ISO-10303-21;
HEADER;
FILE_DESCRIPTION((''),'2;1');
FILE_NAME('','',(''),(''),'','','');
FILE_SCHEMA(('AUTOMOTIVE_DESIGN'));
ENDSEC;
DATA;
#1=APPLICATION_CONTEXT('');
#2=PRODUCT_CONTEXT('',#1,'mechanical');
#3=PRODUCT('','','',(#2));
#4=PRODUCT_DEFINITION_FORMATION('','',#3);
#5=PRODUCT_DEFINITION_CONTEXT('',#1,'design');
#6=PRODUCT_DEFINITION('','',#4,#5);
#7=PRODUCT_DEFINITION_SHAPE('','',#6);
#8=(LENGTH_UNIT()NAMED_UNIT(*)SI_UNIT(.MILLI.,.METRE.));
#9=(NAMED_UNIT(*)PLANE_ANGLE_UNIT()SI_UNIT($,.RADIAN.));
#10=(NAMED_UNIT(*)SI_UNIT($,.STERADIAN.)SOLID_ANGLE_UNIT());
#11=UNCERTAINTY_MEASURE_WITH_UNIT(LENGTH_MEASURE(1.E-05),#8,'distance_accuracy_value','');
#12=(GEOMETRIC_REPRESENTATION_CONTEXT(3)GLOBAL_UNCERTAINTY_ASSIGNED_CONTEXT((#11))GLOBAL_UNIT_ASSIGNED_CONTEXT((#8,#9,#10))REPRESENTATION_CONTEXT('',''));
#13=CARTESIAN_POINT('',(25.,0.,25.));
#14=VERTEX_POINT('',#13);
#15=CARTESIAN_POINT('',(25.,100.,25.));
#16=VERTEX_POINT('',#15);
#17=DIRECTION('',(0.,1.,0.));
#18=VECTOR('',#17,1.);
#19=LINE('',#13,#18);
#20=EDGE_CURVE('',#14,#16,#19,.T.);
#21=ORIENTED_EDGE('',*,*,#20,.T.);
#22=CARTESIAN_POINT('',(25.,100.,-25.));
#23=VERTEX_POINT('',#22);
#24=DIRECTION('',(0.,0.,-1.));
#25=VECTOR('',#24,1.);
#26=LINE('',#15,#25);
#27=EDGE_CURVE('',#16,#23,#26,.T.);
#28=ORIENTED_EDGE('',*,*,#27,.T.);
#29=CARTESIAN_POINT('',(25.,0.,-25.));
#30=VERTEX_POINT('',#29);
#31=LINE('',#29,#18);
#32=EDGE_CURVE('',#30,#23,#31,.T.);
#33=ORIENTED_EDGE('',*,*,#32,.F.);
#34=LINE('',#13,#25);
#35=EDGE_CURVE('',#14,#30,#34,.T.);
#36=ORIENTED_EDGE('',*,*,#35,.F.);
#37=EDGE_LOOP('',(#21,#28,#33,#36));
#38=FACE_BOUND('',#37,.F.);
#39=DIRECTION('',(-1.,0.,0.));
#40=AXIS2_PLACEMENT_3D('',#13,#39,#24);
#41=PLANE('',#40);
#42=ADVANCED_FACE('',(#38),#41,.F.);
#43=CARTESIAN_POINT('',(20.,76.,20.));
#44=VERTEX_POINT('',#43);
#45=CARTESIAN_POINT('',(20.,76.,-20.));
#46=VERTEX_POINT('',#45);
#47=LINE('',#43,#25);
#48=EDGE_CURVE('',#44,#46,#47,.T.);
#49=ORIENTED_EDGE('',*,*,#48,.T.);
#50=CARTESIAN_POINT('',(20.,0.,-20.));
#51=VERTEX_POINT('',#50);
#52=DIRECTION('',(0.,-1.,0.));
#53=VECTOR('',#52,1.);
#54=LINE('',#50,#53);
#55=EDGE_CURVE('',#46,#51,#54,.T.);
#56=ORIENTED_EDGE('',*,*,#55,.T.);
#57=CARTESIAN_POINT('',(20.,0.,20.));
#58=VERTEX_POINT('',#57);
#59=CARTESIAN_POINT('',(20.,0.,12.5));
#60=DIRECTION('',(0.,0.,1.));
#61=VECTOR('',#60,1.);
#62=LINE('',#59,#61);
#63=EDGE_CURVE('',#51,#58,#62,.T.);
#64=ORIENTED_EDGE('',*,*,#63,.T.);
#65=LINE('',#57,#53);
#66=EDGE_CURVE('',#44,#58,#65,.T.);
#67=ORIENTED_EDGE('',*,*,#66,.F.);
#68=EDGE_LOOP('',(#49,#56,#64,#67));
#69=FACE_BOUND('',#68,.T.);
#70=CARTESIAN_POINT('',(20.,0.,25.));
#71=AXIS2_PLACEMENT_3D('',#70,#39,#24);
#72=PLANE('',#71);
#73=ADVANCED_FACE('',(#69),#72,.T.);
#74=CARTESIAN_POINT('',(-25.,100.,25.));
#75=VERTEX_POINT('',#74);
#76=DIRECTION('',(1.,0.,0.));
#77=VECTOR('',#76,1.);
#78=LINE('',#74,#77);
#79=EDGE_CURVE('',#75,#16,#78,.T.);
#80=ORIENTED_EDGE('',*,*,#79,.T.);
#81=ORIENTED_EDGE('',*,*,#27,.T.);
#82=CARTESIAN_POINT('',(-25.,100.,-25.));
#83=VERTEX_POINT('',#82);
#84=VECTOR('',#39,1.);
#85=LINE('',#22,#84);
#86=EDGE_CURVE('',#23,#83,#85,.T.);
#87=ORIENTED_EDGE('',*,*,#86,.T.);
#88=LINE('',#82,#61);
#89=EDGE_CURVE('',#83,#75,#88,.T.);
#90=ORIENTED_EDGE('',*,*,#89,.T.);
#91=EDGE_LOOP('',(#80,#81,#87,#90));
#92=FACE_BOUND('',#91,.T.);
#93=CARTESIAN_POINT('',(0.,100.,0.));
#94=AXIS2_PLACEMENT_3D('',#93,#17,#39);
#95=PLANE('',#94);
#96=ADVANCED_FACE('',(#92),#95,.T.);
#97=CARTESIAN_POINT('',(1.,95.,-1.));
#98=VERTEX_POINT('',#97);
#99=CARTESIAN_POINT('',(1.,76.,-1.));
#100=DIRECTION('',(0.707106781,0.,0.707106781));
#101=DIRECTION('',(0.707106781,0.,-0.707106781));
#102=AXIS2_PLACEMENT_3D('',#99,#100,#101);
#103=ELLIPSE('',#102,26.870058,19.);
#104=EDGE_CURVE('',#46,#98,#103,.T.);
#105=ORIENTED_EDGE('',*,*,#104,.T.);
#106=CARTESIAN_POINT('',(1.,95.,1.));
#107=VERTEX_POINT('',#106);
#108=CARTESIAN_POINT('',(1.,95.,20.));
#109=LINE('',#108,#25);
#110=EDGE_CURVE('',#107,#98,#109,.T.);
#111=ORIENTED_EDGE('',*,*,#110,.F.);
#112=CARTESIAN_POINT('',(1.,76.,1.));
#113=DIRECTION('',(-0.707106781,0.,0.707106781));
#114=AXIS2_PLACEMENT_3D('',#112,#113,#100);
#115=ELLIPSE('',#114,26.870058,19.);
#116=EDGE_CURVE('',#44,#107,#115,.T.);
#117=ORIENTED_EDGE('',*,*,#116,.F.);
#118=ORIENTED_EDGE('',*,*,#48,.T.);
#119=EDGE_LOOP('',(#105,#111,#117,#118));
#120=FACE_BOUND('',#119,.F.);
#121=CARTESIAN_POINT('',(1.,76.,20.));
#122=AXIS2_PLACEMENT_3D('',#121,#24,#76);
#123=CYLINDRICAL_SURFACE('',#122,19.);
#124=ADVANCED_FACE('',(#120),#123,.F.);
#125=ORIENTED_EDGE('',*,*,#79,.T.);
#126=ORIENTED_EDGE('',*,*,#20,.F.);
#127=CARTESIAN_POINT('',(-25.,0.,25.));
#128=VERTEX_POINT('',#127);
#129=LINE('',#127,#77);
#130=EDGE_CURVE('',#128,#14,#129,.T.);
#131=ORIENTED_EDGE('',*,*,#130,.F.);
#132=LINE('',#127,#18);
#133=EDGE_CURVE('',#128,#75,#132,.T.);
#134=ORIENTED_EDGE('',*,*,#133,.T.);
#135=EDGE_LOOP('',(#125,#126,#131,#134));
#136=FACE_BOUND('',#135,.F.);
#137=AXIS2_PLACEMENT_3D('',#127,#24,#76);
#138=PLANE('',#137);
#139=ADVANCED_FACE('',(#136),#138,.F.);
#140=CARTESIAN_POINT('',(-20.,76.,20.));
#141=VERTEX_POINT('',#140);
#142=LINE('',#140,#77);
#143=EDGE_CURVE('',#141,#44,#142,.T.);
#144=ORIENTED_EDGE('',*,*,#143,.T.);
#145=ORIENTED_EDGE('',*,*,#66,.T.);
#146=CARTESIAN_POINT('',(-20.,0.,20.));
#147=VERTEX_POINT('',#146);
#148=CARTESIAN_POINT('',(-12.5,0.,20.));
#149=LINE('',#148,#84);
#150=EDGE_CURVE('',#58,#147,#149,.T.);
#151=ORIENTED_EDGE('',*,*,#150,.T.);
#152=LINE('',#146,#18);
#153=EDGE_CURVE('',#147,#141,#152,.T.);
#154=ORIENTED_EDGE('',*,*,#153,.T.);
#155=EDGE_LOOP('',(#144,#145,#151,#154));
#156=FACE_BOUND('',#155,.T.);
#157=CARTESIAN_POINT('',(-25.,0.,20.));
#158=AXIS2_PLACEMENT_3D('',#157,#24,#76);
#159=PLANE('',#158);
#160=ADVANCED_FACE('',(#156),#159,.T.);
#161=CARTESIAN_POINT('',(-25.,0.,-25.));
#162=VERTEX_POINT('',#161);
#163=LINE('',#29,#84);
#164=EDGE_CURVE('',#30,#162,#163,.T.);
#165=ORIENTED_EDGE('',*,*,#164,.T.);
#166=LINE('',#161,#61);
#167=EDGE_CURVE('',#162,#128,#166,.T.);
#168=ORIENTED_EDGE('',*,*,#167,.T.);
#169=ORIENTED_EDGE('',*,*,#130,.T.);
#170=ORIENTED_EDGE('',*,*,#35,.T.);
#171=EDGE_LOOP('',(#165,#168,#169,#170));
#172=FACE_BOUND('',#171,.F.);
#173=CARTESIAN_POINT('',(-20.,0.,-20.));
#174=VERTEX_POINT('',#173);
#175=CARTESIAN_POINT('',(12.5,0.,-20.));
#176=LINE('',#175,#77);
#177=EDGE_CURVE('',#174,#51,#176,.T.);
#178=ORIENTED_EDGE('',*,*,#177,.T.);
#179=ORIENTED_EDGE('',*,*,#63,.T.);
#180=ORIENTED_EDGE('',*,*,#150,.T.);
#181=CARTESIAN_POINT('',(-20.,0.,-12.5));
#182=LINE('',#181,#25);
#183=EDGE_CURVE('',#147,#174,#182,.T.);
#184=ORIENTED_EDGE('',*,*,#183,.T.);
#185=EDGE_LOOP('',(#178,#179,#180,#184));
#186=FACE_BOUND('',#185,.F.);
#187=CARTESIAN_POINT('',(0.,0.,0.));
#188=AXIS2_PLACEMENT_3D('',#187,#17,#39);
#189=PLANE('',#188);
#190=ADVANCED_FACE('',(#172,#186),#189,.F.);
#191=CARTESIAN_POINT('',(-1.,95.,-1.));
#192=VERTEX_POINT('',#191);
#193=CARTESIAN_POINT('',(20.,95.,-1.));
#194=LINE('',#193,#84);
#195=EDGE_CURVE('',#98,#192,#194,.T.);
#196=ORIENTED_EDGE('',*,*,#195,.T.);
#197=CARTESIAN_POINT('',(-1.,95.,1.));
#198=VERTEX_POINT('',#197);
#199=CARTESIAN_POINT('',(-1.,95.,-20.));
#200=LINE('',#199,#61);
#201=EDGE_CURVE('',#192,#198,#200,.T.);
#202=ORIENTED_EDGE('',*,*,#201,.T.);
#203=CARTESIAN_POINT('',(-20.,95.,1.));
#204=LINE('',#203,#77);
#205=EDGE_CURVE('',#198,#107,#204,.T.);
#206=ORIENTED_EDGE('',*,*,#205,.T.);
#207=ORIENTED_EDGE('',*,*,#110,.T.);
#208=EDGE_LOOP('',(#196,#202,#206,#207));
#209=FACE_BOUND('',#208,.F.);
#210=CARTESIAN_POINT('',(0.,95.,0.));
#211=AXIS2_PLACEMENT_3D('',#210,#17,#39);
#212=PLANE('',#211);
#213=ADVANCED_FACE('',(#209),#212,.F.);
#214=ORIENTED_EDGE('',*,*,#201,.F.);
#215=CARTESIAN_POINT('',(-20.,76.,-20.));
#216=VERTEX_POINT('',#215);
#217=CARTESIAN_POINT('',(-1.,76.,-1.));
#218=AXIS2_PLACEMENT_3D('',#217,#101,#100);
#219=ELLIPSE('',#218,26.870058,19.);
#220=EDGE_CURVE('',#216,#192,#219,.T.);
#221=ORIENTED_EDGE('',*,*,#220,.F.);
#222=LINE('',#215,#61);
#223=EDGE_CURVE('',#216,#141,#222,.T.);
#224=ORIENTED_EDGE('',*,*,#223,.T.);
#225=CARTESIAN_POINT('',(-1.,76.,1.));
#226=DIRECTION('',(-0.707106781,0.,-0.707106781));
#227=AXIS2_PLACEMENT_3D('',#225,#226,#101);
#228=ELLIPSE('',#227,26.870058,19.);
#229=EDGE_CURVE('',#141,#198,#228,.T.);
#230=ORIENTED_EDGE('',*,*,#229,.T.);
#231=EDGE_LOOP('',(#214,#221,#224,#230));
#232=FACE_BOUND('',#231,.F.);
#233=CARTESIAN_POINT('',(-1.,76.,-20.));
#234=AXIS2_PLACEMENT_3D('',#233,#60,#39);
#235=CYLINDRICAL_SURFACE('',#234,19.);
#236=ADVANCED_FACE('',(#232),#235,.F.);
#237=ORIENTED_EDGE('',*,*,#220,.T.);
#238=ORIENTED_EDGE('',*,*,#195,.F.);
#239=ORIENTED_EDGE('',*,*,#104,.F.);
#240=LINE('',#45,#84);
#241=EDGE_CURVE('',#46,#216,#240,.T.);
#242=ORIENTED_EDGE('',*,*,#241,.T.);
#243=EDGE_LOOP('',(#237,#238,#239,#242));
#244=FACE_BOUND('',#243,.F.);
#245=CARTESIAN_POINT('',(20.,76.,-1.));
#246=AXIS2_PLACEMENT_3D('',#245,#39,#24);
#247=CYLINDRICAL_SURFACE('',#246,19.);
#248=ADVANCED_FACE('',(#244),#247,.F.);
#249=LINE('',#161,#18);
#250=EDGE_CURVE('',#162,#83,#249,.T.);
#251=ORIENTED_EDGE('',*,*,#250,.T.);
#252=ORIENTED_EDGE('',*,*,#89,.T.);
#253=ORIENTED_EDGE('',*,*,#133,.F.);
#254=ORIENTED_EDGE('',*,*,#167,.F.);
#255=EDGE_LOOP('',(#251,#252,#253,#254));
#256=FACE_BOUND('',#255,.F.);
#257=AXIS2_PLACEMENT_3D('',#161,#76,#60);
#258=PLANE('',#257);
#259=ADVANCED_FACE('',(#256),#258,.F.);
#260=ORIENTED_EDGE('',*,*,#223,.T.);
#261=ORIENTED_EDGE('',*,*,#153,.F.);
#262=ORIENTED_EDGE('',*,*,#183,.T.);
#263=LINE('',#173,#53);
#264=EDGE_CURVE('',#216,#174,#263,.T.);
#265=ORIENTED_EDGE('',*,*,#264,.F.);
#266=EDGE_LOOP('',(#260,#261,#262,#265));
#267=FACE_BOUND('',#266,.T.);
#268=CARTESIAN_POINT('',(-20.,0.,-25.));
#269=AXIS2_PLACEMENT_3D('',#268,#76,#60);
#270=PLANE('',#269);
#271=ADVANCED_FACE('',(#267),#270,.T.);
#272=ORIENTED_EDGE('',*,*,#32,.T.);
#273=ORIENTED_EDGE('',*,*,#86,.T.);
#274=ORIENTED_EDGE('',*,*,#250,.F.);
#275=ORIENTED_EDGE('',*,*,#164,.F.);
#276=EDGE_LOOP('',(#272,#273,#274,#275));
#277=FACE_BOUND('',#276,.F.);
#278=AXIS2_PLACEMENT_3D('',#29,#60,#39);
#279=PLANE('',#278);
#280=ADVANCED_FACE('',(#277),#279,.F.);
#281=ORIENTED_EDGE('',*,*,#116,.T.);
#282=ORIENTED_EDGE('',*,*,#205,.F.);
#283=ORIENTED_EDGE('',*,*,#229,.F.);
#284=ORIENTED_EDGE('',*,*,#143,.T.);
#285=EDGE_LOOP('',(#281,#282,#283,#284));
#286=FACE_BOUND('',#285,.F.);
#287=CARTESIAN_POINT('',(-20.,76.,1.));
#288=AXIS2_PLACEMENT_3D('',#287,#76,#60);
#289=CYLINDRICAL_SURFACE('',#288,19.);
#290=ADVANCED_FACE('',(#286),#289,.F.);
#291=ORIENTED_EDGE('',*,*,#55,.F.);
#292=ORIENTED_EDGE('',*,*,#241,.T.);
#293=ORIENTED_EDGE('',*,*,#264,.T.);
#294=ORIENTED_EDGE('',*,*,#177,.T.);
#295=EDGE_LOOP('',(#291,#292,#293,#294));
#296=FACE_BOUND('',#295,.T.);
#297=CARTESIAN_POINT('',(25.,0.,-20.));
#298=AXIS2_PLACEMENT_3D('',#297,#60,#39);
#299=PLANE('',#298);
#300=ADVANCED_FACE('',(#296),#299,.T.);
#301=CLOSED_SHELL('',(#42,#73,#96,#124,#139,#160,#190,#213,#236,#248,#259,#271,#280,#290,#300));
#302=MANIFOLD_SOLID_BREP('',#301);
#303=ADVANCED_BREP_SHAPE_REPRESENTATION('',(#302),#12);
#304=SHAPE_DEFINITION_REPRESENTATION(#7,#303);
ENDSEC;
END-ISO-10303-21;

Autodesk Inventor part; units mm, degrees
ref_plane "YZ Plane" through (0, 0, 0) normal (1, 0, 0) x (0, 1, 0)
ref_plane "XZ Plane" through (0, 0, 0) normal (0, 1, 0) x (-1, 0, 0)
ref_plane "XY Plane" through (0, 0, 0) normal (0, 0, 1) x (1, 0, 0)
sketch "Sketch1" plane through (0, 0, 0) normal (0, 1, 0) x (-1, 0, 0)
  line L0 (25, 25) -> (-25, 25)
  line L1 (-25, 25) -> (-25, -25)
  line L2 (-25, -25) -> (25, -25)
  line L3 (25, -25) -> (25, 25)
  line L4 (25, 25) -> (-25, -25) construction
  line L5 (-25, 25) -> (25, -25) construction
  point P0 (0, 0)
  dimension "d0" = 50
  dimension "d1" = 50
extrude "Extrusion1" add sketch "Sketch1" along normal blind 100
shell "Shell1" thickness 5 removed faces 1 at (8.3333, 0, -8.3333)
fillet "Fillet1" radius 19 4 edges at (0, 95, 20) (20, 95, 0) (-20, 95, 0) (0, 95, -20)
equation "\"d1\" = d0"
properties part number "traffic sign"
